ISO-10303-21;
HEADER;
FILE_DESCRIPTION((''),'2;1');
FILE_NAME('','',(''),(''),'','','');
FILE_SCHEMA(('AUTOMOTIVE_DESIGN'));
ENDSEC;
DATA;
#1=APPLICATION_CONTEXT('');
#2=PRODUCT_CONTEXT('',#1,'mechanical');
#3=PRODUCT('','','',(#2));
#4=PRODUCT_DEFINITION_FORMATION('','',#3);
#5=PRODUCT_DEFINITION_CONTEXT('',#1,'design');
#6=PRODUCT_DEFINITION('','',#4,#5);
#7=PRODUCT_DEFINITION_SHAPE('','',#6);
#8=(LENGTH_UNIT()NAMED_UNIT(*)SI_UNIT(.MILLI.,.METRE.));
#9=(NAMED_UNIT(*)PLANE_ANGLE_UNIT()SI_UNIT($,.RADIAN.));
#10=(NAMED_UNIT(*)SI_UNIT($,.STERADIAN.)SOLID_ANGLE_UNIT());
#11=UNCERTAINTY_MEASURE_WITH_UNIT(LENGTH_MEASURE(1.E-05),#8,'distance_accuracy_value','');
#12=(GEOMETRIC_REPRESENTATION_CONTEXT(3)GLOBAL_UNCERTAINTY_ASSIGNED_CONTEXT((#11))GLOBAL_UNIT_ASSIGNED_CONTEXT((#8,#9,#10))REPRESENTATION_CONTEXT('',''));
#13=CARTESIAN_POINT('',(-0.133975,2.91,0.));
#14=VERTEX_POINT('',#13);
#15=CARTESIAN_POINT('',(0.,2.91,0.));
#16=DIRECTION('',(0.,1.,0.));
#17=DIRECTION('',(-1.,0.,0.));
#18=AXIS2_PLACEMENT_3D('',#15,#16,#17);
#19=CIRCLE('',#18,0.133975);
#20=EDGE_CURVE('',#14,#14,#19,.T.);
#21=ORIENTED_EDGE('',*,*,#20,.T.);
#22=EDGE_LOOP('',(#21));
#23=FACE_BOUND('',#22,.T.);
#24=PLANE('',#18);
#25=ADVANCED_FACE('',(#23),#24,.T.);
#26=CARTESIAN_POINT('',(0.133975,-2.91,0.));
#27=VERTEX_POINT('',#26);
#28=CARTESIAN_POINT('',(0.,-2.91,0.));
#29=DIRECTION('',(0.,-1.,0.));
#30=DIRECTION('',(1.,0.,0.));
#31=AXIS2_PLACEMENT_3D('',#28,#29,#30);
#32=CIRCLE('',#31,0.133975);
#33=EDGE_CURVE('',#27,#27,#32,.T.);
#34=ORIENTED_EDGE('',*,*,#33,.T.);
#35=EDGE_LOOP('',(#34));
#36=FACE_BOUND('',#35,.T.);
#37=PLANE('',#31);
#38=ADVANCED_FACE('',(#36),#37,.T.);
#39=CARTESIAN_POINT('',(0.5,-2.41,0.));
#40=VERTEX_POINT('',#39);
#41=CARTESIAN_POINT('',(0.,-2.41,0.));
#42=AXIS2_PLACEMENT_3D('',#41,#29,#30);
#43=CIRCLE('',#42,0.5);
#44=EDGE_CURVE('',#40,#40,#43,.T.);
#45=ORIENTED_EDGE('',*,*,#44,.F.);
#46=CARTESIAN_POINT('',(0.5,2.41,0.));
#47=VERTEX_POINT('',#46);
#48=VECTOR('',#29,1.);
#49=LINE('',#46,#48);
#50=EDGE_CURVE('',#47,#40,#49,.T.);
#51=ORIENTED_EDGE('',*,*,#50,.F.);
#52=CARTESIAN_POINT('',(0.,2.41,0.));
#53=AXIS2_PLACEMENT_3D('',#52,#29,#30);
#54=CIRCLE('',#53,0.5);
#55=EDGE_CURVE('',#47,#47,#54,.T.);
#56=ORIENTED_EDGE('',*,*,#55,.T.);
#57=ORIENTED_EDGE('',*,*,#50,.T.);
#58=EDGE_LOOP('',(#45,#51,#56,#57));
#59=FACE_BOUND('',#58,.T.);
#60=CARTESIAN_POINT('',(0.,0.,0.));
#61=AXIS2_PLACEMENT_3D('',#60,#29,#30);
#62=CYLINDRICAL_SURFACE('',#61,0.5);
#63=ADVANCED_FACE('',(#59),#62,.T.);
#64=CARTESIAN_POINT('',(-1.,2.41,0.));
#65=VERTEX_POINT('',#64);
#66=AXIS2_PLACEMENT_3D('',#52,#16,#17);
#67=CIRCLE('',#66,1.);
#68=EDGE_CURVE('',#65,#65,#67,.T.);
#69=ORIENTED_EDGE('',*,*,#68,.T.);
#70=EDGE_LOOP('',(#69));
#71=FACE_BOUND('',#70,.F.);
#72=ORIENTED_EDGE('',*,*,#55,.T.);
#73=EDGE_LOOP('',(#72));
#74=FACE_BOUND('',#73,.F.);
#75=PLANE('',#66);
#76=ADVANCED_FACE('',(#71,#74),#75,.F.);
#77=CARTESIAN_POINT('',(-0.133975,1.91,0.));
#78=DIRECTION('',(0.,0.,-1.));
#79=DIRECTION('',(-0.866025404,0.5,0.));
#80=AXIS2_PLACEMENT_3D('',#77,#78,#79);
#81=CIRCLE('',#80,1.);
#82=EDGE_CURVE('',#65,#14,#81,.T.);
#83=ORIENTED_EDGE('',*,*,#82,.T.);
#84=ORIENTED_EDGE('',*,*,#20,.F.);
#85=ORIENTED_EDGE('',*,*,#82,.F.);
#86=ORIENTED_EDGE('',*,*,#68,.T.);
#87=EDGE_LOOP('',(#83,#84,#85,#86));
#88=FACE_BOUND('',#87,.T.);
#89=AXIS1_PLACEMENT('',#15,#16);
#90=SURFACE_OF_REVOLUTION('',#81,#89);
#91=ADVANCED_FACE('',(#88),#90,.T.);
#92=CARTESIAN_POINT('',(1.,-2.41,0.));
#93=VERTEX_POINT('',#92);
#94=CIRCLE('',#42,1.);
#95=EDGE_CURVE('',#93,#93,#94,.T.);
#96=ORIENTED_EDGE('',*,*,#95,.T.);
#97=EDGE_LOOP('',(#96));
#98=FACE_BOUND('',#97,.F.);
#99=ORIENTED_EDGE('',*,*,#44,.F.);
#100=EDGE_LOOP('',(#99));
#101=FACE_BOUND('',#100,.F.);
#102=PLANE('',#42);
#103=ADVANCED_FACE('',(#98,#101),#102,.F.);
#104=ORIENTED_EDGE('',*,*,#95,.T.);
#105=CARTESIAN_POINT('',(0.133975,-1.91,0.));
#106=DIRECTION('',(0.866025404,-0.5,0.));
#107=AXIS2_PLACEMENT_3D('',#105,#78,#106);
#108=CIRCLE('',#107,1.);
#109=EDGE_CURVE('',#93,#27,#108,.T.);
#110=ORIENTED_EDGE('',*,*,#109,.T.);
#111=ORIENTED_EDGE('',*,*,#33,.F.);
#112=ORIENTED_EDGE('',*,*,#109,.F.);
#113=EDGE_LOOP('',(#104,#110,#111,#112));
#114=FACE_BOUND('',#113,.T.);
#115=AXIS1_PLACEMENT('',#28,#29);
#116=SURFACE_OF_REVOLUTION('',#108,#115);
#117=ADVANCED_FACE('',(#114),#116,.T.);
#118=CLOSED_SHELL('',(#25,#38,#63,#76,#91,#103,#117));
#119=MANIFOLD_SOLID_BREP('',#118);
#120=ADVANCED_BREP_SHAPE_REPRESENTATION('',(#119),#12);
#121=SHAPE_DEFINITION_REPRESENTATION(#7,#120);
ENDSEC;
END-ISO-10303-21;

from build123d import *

# Parameters (mm, degrees)
F0_R     = 0.5
F1_DEPTH = 2.41
F2_R     = 1
F3_DEPTH = 0.5
F4_R     = 1
F5_DEPTH = 0.5


# Not quite as in the source:
# - a fillet or chamfer that OpenCascade refuses, or shapes differently, is made with other operations: its cross-section is extruded or revolved along the edge and cut away or added


with BuildPart() as f1:
    # F0 (on Front) → F1 (new body, symmetric)
    with BuildSketch(Plane.XZ):
        Circle(F0_R)
    extrude(amount=F1_DEPTH, both=True)

    # F2 (on face) → F3 (join)
    with BuildSketch(Plane.XZ.offset(2.41)):
        Circle(F2_R)
    extrude(amount=F3_DEPTH)

    # F4 (on face) → F5 (join)
    with BuildSketch(Plane(origin=(0, 2.41, 0), x_dir=(-1, 0, 0), z_dir=(0, 1, 0))):
        Circle(F4_R)
    extrude(amount=F5_DEPTH)

    # F6: fillet of radius 1 on 2 edges, made by hand

    # F6_s1 → F6_t2 (revolve, cut)
    with BuildSketch(Plane.XY):
        with BuildLine():
            ThreePointArc((-1, 2.41), (-0.6339745962, 2.7760254038), (-0.1339745962, 2.91))
            Line((-0.1339745962, 2.91), (-1, 2.91))
            Line((-1, 2.91), (-1, 2.41))
        make_face()
    revolve(axis=Axis((0, 2.91, 0), (0, 1, 0)), mode=Mode.SUBTRACT)

    # F6_s3 → F6_t4 (revolve, cut)
    with BuildSketch(Plane.XY):
        with BuildLine():
            ThreePointArc((1, -2.41), (0.6339745962, -2.7760254038), (0.1339745962, -2.91))
            Line((0.1339745962, -2.91), (1, -2.91))
            Line((1, -2.91), (1, -2.41))
        make_face()
    revolve(axis=Axis((0, -2.91, 0), (0, -1, 0)), mode=Mode.SUBTRACT)


solid = f1.part
